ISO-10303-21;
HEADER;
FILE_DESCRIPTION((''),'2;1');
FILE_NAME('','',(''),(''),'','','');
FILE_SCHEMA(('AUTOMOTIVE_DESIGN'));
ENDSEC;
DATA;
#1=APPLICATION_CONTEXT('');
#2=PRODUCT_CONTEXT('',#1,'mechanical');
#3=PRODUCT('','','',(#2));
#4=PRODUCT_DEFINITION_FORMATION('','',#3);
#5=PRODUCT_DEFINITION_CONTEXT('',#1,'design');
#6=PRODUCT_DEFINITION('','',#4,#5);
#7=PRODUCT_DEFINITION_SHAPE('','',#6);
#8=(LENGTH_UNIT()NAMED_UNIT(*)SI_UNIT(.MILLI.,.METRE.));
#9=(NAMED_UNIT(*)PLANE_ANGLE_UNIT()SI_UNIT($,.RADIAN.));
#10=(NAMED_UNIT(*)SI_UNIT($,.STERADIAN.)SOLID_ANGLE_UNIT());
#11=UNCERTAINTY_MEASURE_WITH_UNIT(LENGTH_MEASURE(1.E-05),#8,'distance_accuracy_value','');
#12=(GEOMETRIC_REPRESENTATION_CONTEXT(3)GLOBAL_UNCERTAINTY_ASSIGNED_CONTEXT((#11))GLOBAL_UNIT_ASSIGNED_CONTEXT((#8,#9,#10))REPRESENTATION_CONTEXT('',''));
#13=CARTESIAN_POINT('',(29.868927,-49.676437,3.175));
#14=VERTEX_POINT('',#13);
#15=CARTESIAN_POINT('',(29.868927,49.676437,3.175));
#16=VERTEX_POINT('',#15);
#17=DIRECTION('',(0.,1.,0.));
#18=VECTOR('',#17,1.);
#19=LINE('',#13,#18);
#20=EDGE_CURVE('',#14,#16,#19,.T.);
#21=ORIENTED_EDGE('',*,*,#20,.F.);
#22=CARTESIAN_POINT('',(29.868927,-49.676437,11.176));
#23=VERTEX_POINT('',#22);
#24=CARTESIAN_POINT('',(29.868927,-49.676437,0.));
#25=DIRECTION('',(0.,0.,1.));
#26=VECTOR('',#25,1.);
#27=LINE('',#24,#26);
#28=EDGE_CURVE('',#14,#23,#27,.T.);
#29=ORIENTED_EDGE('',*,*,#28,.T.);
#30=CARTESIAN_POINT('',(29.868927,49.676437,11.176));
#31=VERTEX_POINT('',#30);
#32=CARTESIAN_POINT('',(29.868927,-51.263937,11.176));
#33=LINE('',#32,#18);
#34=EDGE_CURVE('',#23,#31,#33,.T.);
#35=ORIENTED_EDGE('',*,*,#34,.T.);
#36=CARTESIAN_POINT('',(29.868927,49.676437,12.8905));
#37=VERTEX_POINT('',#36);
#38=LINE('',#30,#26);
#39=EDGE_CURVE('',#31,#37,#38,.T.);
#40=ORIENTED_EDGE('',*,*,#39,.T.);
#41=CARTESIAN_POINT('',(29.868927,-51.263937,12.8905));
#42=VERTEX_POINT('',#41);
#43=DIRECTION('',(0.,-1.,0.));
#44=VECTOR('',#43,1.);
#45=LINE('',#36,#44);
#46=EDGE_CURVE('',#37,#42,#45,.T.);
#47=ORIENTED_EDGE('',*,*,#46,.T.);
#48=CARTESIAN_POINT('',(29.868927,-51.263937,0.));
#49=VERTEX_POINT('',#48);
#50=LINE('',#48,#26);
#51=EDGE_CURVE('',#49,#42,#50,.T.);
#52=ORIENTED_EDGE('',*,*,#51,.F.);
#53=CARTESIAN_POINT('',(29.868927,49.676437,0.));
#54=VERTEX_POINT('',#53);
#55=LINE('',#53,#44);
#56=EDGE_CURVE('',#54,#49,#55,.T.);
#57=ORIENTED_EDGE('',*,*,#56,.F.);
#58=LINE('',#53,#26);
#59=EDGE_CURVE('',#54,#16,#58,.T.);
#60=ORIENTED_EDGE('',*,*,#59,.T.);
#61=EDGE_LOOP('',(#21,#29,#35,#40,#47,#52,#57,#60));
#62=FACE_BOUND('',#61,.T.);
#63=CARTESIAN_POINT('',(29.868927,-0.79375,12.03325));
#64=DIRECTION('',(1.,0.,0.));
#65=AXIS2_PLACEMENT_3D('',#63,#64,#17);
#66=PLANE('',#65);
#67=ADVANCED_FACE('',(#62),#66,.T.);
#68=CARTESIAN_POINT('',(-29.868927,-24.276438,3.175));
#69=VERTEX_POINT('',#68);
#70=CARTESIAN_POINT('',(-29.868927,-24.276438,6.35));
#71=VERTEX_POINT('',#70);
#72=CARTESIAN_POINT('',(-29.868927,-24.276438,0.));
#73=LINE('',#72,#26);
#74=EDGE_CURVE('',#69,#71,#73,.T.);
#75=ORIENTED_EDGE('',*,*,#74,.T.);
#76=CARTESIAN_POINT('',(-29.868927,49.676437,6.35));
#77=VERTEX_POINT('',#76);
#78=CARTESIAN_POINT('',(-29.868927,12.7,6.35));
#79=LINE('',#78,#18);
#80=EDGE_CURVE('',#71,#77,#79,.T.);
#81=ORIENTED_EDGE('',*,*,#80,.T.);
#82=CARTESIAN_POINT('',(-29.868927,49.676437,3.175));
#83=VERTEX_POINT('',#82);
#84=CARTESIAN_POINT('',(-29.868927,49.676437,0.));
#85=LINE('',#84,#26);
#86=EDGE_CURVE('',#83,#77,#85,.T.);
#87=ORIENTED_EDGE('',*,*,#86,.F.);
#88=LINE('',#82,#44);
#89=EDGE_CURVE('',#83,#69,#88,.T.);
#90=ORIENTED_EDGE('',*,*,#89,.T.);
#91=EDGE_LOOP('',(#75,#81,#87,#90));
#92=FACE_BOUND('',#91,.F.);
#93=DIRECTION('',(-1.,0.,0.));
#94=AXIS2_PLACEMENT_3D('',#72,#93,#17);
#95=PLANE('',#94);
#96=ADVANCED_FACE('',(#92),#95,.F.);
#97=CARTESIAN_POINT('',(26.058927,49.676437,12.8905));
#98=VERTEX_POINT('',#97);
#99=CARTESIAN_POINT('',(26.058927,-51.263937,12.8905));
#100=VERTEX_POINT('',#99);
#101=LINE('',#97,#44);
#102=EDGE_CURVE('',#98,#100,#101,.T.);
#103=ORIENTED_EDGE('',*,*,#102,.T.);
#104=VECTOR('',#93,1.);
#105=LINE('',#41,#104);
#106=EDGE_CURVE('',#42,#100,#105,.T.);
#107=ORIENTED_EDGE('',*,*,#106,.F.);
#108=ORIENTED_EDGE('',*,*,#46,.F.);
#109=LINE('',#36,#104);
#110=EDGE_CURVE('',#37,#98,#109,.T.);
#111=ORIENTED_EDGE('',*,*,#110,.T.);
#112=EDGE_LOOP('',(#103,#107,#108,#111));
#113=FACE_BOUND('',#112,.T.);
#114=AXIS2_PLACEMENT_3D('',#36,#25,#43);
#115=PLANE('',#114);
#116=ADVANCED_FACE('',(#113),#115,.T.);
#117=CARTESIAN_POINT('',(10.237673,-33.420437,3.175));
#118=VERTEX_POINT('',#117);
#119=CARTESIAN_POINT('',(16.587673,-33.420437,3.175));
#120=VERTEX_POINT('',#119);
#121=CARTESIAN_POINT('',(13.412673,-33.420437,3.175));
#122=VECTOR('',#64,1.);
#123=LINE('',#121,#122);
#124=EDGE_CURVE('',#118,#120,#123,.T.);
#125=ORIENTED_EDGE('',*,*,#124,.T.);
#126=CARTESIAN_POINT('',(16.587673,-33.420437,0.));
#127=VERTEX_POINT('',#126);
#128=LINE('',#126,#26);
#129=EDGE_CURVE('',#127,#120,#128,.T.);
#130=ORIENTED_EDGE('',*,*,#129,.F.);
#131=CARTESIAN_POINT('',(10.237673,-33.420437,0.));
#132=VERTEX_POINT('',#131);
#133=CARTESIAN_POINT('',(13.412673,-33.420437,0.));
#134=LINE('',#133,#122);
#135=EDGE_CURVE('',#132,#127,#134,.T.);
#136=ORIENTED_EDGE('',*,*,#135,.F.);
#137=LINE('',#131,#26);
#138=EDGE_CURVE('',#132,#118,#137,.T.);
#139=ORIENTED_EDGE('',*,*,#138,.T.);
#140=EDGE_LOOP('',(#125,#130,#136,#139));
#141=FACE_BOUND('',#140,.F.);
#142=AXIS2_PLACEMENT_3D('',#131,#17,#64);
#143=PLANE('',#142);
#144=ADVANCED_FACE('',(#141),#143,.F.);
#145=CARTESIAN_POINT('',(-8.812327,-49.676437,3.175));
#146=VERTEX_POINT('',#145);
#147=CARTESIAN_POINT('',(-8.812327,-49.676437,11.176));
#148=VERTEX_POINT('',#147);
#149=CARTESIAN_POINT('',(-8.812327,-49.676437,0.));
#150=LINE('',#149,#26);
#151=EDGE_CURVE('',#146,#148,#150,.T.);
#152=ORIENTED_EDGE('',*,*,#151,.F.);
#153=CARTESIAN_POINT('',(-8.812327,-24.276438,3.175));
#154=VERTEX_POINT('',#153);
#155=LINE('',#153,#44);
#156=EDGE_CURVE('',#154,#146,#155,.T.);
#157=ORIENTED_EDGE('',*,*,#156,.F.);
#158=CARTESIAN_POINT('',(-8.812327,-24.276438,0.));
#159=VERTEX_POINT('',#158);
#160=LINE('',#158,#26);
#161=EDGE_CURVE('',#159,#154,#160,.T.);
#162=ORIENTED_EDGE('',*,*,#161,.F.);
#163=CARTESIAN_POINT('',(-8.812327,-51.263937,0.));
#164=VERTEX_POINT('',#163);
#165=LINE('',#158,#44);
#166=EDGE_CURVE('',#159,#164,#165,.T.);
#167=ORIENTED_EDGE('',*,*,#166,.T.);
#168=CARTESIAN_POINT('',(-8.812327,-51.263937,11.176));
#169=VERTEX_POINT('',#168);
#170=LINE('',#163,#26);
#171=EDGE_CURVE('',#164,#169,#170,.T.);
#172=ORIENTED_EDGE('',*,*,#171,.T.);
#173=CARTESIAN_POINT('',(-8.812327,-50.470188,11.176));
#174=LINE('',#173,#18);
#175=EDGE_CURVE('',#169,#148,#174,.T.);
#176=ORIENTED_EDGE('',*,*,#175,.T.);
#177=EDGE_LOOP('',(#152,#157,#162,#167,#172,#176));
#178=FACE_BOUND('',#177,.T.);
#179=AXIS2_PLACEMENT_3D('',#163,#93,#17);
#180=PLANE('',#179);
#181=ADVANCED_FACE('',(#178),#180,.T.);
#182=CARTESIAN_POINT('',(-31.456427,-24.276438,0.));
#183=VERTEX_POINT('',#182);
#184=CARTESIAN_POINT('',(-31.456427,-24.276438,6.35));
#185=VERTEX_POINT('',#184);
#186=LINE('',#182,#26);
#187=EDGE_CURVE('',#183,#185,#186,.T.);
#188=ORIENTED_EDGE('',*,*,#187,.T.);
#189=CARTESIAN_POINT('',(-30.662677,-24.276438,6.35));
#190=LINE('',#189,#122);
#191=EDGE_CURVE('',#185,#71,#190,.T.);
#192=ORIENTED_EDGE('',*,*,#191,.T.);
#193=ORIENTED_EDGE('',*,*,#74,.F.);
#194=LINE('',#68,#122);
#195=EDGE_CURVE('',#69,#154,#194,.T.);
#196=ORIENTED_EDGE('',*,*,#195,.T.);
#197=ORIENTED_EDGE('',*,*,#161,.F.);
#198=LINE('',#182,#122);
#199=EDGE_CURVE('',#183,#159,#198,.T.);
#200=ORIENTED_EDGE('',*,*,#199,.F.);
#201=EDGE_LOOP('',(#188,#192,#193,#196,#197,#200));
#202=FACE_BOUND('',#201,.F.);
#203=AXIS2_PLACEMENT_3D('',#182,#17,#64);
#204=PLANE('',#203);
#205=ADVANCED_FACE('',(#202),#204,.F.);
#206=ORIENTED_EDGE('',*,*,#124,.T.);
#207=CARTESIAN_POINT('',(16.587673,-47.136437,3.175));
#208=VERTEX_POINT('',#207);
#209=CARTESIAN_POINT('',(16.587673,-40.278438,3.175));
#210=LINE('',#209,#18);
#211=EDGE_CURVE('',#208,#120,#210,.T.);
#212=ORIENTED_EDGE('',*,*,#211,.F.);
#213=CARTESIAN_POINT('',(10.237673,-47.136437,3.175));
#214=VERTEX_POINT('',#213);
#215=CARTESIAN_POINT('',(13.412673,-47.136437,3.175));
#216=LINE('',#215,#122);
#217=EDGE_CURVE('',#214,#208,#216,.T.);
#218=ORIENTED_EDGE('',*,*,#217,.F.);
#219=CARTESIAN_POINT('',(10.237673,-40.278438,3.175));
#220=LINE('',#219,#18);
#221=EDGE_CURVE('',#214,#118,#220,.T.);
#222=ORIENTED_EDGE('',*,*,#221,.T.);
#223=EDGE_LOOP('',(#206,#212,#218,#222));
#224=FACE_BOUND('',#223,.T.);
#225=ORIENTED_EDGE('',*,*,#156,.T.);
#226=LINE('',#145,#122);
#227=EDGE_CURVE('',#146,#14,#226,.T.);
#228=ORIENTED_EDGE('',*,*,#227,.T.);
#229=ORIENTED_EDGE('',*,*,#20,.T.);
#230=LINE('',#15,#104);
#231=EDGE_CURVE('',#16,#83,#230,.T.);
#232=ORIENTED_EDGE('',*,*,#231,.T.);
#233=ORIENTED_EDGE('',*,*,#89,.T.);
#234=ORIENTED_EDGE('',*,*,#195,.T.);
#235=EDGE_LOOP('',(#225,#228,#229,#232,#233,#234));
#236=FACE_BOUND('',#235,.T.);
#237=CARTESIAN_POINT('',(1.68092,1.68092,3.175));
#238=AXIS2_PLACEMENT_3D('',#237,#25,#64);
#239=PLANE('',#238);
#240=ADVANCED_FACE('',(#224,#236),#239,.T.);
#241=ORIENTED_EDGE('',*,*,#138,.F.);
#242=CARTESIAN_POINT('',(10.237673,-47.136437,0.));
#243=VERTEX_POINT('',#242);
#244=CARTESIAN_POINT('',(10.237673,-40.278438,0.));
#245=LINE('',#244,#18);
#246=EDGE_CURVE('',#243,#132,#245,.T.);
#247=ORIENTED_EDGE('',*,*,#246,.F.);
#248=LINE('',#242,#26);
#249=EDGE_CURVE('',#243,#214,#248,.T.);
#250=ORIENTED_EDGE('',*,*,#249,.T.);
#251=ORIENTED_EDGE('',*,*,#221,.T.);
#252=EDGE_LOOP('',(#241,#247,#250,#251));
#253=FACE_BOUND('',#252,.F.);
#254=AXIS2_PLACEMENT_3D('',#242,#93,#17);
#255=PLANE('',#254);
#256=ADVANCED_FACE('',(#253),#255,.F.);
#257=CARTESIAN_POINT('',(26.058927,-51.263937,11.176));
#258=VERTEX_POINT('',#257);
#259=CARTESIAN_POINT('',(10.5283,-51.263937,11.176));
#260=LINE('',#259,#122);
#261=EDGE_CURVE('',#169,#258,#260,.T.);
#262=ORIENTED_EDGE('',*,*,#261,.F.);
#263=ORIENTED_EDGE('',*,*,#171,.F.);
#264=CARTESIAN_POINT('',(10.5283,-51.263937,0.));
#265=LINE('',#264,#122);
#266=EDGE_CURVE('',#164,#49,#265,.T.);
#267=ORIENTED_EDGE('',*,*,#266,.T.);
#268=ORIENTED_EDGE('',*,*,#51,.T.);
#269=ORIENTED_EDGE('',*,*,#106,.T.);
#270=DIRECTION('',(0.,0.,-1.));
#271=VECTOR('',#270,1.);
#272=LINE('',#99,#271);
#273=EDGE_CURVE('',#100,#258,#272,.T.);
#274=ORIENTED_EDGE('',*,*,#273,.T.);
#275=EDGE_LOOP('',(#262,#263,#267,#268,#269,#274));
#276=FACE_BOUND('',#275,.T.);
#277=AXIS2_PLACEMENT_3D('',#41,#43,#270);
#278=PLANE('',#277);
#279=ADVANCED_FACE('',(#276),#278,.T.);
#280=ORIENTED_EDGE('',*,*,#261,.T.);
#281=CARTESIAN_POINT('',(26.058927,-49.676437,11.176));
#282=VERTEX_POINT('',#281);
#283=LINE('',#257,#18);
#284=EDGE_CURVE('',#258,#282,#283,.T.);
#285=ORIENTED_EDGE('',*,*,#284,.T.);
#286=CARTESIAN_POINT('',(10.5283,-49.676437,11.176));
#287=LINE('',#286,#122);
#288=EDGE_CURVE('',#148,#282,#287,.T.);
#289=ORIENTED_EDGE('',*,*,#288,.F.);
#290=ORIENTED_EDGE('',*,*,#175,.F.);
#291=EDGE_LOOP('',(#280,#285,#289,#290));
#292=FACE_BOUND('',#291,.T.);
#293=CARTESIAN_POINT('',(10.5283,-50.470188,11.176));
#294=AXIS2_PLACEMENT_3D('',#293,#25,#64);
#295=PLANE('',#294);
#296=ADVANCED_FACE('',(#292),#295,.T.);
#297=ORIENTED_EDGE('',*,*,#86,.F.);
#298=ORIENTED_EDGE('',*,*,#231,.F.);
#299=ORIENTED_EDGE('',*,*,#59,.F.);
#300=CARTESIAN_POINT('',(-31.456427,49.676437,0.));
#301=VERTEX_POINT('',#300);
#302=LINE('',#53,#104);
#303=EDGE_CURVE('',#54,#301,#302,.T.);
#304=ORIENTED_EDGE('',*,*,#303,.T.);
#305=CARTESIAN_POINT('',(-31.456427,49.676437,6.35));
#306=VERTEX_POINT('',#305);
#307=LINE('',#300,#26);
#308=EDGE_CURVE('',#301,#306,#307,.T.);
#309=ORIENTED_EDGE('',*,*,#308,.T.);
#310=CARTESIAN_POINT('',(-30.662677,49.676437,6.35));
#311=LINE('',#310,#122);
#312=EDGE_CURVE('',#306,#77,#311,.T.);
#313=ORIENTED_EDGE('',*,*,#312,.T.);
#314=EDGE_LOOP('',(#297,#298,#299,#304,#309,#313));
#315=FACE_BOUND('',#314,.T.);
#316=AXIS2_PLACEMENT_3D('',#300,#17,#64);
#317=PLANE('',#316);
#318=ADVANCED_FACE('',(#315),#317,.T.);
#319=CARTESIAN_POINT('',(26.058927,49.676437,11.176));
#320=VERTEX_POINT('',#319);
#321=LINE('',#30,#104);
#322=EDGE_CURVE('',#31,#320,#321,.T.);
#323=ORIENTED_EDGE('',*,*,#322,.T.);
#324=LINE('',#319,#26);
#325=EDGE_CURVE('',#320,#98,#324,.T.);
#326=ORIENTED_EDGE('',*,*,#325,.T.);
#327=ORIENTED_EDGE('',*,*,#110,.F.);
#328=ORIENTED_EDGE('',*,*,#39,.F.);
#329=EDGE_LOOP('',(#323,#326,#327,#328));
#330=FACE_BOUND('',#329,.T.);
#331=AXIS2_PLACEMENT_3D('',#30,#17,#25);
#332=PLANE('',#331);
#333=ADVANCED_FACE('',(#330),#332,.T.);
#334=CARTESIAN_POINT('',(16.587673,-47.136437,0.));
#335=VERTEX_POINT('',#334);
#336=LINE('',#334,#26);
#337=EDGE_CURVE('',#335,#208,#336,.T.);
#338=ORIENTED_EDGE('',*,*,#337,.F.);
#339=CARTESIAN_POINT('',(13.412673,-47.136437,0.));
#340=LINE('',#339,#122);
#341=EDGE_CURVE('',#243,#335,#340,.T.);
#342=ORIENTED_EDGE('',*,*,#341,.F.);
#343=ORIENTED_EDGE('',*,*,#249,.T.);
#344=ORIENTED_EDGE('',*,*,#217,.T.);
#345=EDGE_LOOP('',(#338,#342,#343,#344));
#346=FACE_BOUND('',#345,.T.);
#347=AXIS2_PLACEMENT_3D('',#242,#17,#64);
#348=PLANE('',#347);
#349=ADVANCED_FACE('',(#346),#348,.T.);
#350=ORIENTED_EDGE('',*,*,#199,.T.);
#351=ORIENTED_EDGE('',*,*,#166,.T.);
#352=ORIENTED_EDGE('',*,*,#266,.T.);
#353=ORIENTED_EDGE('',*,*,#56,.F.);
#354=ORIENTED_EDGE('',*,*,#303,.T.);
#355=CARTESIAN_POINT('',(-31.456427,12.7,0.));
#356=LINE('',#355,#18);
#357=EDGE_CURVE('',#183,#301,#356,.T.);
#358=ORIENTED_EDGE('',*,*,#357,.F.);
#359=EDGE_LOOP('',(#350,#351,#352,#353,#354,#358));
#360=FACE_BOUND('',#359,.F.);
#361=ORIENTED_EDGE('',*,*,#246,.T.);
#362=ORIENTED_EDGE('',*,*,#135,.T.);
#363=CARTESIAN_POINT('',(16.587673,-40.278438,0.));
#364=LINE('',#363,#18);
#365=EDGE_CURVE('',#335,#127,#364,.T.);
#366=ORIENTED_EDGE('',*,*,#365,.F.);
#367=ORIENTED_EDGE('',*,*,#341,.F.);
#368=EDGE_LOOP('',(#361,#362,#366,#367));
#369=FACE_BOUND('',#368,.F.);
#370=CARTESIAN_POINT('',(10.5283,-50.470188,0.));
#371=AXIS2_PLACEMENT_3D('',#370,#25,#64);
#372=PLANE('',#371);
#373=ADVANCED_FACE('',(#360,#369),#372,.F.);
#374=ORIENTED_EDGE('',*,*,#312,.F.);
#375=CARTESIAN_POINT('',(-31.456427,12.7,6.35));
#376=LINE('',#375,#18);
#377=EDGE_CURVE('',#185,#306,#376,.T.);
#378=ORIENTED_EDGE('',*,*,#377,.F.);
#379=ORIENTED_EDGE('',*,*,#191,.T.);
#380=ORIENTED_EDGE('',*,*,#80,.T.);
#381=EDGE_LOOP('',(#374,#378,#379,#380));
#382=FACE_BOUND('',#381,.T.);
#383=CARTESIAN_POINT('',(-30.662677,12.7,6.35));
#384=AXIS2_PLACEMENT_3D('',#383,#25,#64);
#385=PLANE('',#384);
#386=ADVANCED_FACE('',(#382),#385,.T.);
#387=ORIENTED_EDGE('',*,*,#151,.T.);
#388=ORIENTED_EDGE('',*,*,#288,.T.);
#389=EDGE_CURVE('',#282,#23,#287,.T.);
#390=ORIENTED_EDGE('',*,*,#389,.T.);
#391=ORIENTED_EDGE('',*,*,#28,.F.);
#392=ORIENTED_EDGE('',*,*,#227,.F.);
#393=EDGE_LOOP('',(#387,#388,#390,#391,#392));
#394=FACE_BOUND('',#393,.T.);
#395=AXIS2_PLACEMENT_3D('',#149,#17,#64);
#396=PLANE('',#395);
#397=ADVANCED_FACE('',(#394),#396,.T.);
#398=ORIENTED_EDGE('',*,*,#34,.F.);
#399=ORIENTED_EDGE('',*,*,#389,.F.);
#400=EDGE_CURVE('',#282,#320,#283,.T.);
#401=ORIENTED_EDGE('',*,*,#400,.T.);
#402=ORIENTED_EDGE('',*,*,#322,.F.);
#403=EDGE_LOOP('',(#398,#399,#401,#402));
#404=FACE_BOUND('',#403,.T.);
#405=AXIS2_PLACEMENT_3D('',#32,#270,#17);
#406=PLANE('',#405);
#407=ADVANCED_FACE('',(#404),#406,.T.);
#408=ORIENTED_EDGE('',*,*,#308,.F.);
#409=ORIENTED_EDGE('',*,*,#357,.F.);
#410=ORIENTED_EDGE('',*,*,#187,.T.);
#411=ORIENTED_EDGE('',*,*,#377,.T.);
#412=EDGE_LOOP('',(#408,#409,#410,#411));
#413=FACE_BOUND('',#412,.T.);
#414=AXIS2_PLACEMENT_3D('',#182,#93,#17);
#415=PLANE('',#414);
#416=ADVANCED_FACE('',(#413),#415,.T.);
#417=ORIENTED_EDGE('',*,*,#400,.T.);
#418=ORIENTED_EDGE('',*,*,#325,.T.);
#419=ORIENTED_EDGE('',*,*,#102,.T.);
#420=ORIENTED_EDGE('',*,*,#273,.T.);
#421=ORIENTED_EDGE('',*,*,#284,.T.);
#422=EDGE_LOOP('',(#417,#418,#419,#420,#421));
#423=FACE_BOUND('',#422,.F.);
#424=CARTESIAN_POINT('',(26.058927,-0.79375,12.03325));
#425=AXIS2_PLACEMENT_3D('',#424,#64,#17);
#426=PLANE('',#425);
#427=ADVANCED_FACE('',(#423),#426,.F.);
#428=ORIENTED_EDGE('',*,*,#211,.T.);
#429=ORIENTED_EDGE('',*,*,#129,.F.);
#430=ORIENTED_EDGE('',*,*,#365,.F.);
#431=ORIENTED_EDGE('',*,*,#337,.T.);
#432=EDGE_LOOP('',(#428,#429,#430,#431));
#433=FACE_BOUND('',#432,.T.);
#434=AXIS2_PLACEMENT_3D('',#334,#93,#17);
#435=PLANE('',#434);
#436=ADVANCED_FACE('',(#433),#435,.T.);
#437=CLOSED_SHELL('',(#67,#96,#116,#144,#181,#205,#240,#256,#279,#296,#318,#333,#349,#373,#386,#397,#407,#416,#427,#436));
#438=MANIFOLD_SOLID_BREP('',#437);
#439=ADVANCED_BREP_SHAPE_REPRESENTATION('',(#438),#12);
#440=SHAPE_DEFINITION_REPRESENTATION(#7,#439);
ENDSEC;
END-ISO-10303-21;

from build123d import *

# Parameters (mm, degrees)
F0_W     = 6.35
F0_H     = 13.716
F1_DEPTH = 3.175
F0_W_2   = 1.5875
F0_H_2   = 73.952875
F2_DEPTH = 6.35
F0_W_3   = 38.6812536
F0_H_3   = 1.5875
F3_DEPTH = 11.176
F7_DEPTH = 3.81


# Not quite as in the source:
# - a feature names something its author has since deleted; it is built from what else it names


with BuildPart() as f1:
    # F0 (on Top) → F1 (new body)
    with BuildSketch(Plane.XY):
        Polygon((29.8689268, -49.6764375), (29.8689268, 49.6764375), (-29.8689268, 49.6764375), (-29.8689268, -24.2764375), (-8.8123268, -24.2764375), (-8.8123268, -49.6764375), align=None)
        with Locations((13.4126732, -40.2784375)):
            Rectangle(F0_W, F0_H, mode=Mode.SUBTRACT)
    extrude(amount=F1_DEPTH)

    # F0 (on Top) → F2 (join)
    with BuildSketch(Plane.XY):
        with Locations((-30.6626768, 12.7)):
            Rectangle(F0_W_2, F0_H_2)
    extrude(amount=F2_DEPTH)

    # F0 (on Top) → F3 (join)
    with BuildSketch(Plane.XY):
        with Locations((10.5283, -50.4701875)):
            Rectangle(F0_W_3, F0_H_3)
    extrude(amount=F3_DEPTH)

    # F6 (on face) → F7 (join)
    with BuildSketch(Plane.YZ.offset(29.8689268)):
        Polygon((-51.2639375, 12.8905), (-51.2639375, 11.176), (-49.6764375, 11.176), (49.6764375, 11.176), (49.6764375, 12.8905), align=None)
    extrude(amount=-F7_DEPTH)


solid = f1.part
